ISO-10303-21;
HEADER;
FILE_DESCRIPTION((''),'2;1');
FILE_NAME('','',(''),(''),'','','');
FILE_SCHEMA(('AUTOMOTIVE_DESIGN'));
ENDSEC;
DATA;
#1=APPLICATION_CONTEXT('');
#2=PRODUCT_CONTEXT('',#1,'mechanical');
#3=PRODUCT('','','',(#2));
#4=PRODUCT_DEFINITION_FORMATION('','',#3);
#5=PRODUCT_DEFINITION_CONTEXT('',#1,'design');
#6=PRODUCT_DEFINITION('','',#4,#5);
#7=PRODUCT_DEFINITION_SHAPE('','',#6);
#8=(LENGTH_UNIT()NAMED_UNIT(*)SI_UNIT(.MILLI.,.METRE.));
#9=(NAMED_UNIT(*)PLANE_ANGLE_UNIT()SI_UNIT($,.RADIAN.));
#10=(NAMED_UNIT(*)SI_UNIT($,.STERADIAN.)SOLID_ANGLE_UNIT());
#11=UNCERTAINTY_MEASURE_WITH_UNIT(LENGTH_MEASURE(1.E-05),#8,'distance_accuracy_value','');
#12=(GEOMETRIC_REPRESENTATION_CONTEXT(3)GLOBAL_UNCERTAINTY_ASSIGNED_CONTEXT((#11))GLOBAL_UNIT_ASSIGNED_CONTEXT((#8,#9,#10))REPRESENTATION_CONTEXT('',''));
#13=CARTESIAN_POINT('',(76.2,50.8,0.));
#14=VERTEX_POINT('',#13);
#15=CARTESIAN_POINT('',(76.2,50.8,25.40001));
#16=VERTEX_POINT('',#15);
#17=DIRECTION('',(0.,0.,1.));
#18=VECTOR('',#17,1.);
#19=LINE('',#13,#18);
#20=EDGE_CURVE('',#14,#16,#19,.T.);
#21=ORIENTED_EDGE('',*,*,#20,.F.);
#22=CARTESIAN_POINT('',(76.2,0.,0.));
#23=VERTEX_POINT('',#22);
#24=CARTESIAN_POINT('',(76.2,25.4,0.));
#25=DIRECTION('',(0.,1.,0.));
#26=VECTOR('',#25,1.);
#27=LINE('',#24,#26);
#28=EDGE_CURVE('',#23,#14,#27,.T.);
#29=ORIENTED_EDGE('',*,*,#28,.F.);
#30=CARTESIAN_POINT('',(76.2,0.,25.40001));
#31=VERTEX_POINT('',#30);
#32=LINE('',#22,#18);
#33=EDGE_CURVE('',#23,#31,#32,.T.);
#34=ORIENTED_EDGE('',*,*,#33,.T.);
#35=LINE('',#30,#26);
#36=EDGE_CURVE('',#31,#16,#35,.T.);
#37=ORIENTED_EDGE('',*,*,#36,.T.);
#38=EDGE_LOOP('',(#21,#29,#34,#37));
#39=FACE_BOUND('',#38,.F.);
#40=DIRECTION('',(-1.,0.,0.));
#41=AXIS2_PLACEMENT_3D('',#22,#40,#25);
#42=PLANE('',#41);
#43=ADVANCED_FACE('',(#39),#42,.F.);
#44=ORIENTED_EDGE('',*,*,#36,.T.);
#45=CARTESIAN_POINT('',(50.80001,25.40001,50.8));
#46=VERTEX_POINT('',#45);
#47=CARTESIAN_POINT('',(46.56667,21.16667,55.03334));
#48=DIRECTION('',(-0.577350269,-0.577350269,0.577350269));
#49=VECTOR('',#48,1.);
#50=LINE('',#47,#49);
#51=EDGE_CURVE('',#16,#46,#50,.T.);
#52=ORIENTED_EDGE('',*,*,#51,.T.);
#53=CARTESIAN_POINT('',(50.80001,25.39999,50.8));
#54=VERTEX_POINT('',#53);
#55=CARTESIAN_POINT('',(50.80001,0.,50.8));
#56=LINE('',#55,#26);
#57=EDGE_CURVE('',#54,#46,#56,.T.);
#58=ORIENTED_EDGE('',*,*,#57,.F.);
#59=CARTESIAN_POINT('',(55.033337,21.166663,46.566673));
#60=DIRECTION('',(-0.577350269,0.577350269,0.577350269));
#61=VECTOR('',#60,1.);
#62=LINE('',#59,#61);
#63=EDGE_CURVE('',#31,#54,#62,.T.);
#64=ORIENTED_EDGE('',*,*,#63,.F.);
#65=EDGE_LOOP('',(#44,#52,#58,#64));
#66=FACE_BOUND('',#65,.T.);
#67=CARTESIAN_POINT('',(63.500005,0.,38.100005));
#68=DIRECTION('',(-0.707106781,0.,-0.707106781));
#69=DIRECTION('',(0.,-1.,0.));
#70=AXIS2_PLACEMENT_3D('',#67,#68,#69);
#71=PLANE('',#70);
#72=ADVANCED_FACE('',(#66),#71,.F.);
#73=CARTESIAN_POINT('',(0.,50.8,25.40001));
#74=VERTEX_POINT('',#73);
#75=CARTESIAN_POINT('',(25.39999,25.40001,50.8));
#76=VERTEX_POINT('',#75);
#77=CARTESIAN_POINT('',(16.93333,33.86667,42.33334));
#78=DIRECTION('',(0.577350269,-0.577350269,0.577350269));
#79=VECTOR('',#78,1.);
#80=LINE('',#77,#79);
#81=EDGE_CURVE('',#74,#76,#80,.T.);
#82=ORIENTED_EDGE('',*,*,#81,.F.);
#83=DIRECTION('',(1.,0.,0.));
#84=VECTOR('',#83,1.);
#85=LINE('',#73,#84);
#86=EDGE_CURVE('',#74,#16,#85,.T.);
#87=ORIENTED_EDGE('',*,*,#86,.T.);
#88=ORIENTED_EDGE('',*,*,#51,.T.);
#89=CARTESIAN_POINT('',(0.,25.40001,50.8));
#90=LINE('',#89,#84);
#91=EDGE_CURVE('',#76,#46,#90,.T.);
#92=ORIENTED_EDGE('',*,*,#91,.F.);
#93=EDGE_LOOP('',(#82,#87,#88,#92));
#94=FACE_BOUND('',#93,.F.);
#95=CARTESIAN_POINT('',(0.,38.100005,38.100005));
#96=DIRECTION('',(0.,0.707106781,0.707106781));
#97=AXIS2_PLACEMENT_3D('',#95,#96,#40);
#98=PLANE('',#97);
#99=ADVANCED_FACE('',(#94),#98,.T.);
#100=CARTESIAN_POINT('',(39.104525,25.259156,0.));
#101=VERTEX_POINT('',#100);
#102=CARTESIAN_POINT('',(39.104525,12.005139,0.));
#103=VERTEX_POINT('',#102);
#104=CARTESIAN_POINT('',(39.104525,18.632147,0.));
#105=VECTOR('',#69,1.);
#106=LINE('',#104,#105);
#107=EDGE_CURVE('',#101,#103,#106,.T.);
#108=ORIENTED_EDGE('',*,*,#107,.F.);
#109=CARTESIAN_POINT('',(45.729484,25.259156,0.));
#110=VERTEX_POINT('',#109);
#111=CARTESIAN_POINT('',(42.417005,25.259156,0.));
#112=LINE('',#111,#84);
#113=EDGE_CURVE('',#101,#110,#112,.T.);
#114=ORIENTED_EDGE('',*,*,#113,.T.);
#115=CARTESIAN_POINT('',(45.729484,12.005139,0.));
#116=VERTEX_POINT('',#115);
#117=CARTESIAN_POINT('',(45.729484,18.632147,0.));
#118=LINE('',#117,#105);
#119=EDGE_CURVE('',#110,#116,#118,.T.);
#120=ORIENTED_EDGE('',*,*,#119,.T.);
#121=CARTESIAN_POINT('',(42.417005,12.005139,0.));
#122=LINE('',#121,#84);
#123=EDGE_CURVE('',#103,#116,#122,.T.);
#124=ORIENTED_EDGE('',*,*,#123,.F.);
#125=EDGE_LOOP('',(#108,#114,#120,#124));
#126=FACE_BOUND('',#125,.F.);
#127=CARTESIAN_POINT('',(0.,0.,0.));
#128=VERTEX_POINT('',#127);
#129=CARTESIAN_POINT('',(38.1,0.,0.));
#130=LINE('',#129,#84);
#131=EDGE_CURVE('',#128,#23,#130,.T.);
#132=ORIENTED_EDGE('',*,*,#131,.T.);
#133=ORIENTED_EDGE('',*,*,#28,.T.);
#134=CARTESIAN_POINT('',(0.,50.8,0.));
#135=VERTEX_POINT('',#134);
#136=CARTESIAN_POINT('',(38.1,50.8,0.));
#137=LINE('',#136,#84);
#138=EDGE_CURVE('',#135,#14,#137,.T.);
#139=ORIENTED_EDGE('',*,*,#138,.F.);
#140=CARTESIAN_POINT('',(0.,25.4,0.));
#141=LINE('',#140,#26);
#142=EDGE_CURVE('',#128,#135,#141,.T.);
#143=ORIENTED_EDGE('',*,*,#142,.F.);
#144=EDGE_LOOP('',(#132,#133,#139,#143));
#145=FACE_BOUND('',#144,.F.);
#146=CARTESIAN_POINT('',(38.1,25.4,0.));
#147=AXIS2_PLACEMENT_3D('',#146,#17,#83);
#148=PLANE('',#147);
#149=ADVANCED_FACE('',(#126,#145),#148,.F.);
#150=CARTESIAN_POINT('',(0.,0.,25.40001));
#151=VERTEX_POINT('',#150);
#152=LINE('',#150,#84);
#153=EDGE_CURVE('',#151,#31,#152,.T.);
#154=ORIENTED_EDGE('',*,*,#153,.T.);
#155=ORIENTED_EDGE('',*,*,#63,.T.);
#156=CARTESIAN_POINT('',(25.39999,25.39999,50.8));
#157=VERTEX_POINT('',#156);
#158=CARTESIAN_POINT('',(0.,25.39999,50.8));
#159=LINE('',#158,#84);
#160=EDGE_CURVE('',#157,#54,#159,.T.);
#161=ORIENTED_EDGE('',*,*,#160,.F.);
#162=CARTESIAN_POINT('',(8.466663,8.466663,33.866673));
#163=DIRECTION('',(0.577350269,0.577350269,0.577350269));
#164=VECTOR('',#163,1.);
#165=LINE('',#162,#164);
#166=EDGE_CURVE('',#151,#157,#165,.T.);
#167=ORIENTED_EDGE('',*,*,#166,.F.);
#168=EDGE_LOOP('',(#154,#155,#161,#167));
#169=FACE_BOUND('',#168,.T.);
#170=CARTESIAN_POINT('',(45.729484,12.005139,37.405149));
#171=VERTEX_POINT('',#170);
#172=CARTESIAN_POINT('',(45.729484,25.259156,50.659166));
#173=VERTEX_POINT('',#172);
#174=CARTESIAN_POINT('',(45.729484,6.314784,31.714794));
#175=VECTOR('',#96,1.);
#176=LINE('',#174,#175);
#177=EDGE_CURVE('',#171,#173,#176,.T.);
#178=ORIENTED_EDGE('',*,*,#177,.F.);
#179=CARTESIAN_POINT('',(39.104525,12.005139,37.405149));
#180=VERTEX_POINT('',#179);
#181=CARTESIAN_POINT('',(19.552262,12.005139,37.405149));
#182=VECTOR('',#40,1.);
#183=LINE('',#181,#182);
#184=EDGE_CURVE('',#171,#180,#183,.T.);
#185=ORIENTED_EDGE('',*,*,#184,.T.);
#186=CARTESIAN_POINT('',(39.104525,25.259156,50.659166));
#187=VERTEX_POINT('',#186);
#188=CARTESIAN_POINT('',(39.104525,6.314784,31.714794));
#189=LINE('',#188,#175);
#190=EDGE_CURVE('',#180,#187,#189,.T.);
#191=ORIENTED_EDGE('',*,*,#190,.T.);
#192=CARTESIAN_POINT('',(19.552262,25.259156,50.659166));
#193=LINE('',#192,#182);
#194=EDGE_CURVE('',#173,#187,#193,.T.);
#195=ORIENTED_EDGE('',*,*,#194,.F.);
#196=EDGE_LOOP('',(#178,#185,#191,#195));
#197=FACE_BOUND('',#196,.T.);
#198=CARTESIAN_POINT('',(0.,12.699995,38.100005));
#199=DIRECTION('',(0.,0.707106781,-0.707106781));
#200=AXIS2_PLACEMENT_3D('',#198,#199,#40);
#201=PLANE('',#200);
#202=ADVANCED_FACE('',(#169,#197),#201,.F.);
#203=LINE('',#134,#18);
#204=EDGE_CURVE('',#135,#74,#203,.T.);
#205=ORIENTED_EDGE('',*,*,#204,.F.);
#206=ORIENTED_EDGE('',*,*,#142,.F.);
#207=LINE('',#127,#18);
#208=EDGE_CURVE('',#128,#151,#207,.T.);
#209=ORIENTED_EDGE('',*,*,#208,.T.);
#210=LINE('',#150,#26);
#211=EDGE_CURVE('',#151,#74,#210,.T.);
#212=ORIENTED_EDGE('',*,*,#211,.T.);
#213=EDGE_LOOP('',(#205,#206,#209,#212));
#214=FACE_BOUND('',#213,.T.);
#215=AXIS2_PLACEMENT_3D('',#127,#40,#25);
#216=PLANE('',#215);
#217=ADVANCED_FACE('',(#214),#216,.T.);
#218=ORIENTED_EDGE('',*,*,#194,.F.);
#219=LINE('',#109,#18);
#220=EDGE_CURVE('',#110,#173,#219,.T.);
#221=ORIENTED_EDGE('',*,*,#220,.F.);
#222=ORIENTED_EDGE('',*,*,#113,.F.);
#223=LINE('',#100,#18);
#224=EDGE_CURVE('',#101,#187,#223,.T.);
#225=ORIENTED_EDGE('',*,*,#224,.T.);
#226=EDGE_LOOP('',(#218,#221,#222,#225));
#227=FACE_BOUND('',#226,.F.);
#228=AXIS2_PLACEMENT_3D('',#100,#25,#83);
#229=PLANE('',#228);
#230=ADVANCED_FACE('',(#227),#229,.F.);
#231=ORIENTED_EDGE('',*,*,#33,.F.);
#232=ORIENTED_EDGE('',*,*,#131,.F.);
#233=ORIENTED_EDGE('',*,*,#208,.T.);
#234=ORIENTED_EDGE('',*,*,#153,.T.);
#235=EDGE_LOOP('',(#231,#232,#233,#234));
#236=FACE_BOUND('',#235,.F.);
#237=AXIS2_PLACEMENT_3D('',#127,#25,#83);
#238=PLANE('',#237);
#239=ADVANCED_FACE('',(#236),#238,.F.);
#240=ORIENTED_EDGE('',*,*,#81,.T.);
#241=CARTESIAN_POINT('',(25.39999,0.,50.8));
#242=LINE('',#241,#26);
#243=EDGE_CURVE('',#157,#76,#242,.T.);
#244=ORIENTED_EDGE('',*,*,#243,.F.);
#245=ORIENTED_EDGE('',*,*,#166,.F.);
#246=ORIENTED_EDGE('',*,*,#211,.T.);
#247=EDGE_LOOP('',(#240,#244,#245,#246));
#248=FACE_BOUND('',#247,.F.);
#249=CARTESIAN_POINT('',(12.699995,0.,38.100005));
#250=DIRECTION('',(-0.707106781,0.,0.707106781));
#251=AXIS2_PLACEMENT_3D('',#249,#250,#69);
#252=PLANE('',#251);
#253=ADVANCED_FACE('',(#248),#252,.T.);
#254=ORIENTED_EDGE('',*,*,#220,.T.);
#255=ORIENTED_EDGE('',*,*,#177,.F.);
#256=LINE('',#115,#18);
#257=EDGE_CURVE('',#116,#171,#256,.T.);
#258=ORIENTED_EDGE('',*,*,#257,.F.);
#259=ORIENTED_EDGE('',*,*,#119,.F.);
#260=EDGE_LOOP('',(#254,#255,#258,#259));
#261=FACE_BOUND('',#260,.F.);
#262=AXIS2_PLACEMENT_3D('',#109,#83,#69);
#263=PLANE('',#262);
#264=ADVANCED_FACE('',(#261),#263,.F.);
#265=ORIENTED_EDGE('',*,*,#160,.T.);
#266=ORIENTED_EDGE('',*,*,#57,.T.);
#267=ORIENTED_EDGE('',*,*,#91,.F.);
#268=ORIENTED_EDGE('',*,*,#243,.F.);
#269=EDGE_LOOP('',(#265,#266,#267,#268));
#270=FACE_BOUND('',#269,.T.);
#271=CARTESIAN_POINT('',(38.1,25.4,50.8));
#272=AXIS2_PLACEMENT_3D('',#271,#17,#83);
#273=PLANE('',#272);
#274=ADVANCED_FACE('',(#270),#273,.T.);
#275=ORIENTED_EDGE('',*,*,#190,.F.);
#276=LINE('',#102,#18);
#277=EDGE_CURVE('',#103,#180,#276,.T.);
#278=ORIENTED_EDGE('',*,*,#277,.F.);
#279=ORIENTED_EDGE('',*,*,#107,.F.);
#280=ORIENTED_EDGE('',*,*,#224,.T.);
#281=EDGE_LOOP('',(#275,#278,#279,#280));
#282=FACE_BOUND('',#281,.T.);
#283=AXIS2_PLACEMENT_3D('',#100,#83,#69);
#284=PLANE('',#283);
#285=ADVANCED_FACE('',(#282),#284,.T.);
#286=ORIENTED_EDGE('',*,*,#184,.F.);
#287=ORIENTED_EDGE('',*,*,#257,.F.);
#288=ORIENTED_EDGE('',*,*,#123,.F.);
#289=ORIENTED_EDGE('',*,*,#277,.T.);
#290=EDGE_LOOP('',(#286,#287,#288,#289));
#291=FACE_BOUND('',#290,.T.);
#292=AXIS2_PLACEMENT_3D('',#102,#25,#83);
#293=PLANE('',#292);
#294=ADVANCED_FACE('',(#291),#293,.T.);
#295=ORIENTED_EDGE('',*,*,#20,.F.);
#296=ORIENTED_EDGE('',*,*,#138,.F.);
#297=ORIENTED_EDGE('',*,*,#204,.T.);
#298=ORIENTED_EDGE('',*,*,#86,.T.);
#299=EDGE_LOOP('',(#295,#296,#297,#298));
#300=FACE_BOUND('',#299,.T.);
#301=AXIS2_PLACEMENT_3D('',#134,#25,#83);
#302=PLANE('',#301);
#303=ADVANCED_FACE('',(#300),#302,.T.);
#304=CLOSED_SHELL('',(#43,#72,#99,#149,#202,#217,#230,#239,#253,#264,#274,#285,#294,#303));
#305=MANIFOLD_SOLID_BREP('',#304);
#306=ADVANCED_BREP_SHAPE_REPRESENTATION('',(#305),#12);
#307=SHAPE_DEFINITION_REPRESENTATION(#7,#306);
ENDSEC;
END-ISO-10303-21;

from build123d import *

# Parameters (mm, degrees)
F0_W     = 76.2
F0_H     = 50.8
F1_DEPTH = 50.8
F3_SIZE  = 25.39999
F4_W     = 6.6249594092
F4_H     = 13.2540166378
F5_DEPTH = 50.801


# Not quite as in the source:
# - a fillet or chamfer is up to 0.001 mm smaller than in the source, because OpenCascade refuses the exact size


with BuildPart() as f1:
    # F0 (on Top) → F1 (new body)
    with BuildSketch(Plane.XY):
        with Locations((38.1, 25.4)):
            Rectangle(F0_W, F0_H)
    extrude(amount=F1_DEPTH)

    # F3 (size 25.4 in the source; OpenCascade refuses exactly that, so slightly less here)
    f3_edges = [f1.edges().sort_by_distance(p)[0] for p in [
        (0, 25.4, 50.8),
        (76.2, 25.4, 50.8),
        (38.1, 0, 50.8),
        (38.1, 50.8, 50.8),
    ]]
    chamfer(f3_edges, length=F3_SIZE)

    # F4 (on face) → F5 (cut, through all)
    with BuildSketch(Plane(origin=(0, 0, 0), x_dir=(1, 0, 0), z_dir=(0, 0, -1))):
        with Locations((42.4170047045, -18.6321474612)):
            Rectangle(F4_W, F4_H)
    extrude(amount=-F5_DEPTH, mode=Mode.SUBTRACT)


solid = f1.part
